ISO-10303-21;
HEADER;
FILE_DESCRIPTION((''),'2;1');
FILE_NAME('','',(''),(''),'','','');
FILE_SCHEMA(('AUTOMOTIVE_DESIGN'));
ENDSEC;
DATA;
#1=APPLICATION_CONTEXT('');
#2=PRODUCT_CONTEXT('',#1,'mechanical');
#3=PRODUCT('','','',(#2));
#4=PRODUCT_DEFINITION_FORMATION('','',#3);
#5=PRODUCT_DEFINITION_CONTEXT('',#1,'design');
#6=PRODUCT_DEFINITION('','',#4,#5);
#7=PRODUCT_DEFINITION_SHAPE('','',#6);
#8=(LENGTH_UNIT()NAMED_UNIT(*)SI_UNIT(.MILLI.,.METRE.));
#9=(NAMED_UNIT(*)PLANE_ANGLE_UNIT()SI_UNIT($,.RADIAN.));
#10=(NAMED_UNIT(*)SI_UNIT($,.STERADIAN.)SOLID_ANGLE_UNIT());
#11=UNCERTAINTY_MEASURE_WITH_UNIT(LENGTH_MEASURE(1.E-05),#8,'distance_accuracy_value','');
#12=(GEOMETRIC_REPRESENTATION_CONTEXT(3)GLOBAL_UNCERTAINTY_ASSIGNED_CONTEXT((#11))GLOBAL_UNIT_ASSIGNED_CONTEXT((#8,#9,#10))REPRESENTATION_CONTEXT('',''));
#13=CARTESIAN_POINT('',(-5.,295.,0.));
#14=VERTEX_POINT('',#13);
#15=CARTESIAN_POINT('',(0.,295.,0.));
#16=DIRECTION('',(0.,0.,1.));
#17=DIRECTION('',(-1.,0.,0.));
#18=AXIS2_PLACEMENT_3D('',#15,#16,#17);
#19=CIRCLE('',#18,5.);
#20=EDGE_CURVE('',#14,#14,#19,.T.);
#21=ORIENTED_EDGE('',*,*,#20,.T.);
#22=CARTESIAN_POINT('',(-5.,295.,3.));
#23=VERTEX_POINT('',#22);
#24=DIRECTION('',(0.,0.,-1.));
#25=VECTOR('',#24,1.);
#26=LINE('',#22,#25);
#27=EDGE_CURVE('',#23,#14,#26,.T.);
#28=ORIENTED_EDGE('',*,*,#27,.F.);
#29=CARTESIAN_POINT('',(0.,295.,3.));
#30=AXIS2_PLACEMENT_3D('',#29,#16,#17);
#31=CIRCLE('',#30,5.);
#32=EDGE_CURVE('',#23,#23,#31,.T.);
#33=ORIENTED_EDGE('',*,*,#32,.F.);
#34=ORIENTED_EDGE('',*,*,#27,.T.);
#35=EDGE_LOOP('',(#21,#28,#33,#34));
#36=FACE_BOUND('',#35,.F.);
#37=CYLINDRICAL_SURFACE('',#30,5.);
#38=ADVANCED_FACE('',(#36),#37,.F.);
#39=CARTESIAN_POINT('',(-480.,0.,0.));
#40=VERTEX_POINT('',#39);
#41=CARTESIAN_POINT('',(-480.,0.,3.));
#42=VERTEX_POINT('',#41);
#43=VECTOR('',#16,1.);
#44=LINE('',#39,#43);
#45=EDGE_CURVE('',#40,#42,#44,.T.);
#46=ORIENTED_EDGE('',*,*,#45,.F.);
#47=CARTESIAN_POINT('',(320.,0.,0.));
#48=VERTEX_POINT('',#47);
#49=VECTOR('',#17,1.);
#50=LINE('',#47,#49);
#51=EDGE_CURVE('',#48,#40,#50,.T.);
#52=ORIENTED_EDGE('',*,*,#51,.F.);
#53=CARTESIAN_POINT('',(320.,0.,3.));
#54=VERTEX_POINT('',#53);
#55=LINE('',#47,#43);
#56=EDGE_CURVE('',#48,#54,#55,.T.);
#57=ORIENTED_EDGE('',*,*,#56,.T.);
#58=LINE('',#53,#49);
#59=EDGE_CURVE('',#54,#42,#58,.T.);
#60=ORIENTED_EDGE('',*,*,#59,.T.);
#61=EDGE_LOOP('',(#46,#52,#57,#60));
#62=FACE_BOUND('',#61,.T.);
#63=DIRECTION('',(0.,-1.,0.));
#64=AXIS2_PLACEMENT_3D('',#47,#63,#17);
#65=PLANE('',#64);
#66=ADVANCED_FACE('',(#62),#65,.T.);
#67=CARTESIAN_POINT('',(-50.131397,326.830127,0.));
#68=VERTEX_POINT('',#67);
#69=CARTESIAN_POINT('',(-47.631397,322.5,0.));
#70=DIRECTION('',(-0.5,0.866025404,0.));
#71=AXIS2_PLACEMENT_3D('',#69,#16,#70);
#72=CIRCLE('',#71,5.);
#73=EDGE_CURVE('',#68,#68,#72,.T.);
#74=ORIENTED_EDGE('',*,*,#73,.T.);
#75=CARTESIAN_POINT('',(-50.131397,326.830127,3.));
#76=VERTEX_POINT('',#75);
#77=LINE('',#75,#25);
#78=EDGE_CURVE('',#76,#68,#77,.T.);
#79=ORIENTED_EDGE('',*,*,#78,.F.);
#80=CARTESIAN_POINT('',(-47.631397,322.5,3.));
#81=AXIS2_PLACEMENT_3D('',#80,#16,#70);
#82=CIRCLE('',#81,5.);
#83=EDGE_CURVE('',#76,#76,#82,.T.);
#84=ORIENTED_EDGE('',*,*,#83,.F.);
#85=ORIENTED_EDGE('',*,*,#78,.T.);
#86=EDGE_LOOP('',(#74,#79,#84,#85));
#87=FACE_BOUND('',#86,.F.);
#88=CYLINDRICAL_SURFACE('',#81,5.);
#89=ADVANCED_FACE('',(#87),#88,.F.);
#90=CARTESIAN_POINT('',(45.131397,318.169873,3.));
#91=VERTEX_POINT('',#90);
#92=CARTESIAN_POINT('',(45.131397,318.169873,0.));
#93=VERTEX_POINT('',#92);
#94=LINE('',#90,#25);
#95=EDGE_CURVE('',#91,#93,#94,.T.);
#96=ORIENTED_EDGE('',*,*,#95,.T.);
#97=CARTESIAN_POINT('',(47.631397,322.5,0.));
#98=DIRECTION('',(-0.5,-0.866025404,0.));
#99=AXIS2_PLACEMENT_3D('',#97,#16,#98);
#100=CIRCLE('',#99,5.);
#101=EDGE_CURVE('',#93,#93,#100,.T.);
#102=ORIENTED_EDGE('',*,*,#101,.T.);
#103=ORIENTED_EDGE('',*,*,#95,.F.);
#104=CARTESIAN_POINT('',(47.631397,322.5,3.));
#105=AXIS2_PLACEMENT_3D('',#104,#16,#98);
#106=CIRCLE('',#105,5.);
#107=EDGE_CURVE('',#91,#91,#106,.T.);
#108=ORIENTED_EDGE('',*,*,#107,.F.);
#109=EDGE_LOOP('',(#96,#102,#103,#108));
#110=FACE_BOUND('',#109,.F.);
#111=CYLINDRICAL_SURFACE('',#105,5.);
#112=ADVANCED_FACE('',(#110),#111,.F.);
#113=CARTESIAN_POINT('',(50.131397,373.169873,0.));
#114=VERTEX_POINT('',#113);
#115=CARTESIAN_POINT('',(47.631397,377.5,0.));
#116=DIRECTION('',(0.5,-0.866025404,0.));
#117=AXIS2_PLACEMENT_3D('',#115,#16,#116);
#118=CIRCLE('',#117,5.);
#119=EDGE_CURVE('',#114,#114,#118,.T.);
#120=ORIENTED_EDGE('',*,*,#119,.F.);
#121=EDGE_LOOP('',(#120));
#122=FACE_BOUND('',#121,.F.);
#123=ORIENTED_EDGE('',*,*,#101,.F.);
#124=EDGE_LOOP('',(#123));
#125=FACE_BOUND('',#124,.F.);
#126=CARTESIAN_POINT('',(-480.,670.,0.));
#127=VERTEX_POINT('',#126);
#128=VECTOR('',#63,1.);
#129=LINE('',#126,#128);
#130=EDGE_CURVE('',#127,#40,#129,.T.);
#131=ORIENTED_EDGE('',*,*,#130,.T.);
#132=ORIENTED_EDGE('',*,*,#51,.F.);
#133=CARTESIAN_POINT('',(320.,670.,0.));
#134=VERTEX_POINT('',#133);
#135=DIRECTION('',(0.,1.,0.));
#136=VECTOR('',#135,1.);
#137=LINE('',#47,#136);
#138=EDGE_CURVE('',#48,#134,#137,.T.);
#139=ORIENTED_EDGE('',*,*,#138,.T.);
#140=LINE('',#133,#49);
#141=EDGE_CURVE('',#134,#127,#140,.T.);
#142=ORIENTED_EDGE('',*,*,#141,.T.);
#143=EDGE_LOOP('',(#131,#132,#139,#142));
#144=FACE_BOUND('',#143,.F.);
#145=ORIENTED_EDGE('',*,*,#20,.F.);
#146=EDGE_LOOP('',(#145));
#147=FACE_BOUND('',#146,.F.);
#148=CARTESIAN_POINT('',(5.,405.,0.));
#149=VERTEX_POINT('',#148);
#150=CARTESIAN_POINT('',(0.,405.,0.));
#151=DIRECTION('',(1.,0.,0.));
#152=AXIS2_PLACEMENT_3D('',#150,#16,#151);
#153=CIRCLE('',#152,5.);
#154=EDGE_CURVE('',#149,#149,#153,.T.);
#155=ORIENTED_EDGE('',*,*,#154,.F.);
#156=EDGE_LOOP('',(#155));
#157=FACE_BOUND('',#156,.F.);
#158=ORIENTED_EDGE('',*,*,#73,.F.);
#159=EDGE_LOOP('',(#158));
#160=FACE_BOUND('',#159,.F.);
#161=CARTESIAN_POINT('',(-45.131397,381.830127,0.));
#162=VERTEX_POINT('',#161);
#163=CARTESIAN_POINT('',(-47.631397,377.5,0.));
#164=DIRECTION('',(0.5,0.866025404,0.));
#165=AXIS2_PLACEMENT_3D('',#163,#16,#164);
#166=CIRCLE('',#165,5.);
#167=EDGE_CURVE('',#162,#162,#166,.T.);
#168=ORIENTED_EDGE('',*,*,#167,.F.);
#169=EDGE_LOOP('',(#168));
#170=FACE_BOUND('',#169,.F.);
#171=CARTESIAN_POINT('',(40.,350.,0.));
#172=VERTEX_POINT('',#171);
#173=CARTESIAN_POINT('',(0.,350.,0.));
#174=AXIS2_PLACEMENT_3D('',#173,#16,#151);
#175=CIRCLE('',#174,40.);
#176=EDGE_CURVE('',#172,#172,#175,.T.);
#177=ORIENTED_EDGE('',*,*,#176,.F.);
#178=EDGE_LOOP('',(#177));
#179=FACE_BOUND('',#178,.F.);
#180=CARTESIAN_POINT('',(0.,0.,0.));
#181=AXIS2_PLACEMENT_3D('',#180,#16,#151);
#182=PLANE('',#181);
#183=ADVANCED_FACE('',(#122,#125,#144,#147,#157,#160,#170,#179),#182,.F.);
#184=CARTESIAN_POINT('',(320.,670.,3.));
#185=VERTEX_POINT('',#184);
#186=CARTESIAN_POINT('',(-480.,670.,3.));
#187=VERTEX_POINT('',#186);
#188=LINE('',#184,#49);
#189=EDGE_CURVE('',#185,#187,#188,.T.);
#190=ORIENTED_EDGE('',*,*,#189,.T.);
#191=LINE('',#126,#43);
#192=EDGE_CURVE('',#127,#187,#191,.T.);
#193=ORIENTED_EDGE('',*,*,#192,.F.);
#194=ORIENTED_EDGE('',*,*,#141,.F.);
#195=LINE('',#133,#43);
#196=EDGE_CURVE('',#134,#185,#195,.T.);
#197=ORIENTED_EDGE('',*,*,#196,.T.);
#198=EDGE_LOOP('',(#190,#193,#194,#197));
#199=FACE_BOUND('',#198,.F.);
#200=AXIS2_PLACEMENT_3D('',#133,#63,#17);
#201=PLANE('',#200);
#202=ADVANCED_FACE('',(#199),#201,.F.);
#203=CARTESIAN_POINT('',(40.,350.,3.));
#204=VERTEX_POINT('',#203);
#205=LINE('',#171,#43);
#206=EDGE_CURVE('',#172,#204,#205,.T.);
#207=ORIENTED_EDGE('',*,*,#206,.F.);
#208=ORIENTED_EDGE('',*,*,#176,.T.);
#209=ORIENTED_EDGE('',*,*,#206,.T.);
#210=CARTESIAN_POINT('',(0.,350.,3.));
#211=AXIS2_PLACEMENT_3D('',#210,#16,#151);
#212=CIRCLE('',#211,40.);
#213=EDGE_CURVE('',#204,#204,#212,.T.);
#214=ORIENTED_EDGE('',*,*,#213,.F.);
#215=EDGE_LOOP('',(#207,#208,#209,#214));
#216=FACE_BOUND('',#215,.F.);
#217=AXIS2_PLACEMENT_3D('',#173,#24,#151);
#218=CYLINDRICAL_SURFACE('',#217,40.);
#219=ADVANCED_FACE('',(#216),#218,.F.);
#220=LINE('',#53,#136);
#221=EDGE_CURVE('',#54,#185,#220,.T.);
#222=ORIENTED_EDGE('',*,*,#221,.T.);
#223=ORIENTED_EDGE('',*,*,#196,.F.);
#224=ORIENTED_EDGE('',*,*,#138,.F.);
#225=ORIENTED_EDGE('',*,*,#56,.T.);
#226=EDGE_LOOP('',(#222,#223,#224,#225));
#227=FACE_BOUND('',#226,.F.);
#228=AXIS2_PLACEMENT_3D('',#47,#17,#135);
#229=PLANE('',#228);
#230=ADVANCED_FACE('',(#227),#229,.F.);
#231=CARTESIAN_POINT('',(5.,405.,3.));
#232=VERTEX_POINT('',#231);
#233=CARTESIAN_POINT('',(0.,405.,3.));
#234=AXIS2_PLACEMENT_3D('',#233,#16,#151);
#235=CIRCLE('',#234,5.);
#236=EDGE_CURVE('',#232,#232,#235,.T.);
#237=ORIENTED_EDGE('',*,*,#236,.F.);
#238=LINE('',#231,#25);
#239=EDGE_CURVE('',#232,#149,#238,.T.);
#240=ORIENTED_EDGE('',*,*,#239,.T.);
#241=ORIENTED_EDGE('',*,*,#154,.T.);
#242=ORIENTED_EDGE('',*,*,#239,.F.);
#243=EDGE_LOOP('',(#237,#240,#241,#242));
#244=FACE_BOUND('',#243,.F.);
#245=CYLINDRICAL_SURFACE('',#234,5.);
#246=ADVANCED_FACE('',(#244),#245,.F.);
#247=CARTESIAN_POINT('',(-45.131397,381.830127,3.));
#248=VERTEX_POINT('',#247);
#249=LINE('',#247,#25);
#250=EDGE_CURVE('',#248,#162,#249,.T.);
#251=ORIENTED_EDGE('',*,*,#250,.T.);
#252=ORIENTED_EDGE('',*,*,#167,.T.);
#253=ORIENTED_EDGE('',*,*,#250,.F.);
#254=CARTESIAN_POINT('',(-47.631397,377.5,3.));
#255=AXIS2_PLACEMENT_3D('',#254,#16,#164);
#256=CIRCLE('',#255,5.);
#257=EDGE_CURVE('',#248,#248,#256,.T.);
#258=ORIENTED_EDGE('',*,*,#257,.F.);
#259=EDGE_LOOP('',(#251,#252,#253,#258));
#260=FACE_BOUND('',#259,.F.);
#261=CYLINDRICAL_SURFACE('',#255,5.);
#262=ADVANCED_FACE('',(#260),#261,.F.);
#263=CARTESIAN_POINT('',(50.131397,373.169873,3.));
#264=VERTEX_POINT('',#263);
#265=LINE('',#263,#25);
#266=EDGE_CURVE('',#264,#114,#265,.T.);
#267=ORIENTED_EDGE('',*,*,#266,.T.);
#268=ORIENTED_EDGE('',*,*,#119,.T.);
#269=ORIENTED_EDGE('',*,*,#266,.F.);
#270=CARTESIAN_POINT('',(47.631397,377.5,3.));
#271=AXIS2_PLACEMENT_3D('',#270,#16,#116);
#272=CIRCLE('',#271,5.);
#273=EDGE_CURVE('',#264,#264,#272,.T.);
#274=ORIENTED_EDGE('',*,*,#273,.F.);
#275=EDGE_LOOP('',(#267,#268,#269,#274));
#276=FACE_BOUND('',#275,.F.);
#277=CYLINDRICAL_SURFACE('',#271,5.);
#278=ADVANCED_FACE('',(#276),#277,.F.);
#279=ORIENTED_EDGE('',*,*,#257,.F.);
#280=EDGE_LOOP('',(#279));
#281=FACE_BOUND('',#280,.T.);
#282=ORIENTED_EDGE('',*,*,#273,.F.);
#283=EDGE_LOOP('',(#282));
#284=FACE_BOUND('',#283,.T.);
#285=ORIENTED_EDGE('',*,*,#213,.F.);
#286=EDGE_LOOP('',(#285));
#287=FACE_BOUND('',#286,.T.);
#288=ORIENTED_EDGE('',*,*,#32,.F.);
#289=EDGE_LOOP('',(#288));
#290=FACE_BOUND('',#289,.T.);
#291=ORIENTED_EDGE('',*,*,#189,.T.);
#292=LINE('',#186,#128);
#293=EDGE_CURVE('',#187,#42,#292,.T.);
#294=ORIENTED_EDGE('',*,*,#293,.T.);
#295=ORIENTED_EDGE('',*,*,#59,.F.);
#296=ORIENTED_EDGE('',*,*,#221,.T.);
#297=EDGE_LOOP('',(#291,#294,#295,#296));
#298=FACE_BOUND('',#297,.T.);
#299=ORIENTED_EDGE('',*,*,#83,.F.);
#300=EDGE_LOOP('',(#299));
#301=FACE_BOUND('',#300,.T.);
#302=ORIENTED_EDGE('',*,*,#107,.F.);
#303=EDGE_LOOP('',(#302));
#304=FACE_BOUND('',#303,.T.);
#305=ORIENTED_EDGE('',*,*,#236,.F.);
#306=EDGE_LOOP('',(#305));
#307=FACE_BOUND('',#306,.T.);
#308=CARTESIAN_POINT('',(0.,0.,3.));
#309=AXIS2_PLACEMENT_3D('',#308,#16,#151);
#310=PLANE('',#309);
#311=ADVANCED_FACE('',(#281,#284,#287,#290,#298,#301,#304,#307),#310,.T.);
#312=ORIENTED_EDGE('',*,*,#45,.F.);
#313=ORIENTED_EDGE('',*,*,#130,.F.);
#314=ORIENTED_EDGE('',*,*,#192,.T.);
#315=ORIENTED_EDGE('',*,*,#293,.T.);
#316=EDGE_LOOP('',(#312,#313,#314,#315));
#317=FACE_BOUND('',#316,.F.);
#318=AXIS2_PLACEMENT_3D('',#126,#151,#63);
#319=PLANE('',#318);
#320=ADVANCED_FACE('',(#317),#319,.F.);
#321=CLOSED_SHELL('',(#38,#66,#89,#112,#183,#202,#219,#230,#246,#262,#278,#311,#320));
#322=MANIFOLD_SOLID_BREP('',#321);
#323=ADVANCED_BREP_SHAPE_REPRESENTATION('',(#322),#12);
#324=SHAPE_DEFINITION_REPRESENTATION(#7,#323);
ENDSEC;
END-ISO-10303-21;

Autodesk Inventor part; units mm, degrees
ref_plane "YZ Plane" through (0, 0, 0) normal (1, 0, 0) x (0, 1, 0)
ref_plane "XZ Plane" through (0, 0, 0) normal (0, 1, 0) x (-1, 0, 0)
ref_plane "XY Plane" through (0, 0, 0) normal (0, 0, 1) x (1, 0, 0)
sketch "Sketch1" plane through (0, 0, 0) normal (0, 0, 1) x (1, 0, 0)
  line L0 (320, 0) -> (320, 670)
  line L1 (320, 670) -> (-480, 670)
  line L2 (-480, 670) -> (-480, 0)
  circle A0 centre (0, 350) radius 40
  line L3 (320, 0) -> (-480, 0)
  point P0 (0, 0)
  dimension "d14" = 80
  dimension "d15" = 320
  dimension "d17" = 320
  dimension "d26" = 800
  dimension "d27" = 670
extrude "Plate1" add sketch "Sketch1" along normal blind 3
sketch "Sketch2" plane through (0, 0, 0) normal (0, 0, -1) x (-1, 0, 0)
  line L0 (-300, 650) -> (-100, 650) construction
  line L1 (-100, 650) -> (-100, 630) construction
  line L2 (-100, 630) -> (-300, 630) construction
  line L3 (-300, 630) -> (-300, 650) construction
  line L4 (-320, 670) -> (480, 670) projected
  line L5 (-320, 0) -> (-320, 670) projected
  point P0 (0, 0)
  point P1 (-48, 100)
  point P2 (480, 670)
  point P3 (-251, -525)
  point P4 (-50, 98)
  point P5 (-320, 0)
  dimension "d6" = 200
  dimension "d9" = 20
  dimension "d10" = 20
  dimension "d11" = 20
mark "Mark1"
sketch "Sketch3" plane through (0, 0, 3) normal (0, 0, 1) x (1, 0, 0)
  circle A0 centre (0, 405) radius 5
  circle A1 centre (0, 350) radius 40 projected
  point P0 (0, 0)
  dimension "d19" = 10
  dimension "d20" = 55
extrude "Cut1" cut sketch "Sketch3" against normal through all contours A0
pattern_circular "Circular Pattern1" count 6 over 360 about axis through (0, 350, 0) along (0, 0, 1) of "Cut1"
equation "\"d2\" = Thickness"
equation "\"BendReliefWidth\" = Thickness"
equation "\"BendReliefDepth\" = 0.5 * Thickness"
equation "\"CornerReliefSize\" = 4 * Thickness"
equation "\"MinimumRemnant\" = 2 * Thickness"
equation "\"TransitionRadius\" = BendRadius"
equation "\"JacobiRadiusSize\" = BendRadius"
equation "\"GapSize\" = Thickness"
equation "\"Thickness\" = 3"
equation "\"BendRadius\" = 2.75"
properties part number "TRM 015 left board main" material "AISI 304"
